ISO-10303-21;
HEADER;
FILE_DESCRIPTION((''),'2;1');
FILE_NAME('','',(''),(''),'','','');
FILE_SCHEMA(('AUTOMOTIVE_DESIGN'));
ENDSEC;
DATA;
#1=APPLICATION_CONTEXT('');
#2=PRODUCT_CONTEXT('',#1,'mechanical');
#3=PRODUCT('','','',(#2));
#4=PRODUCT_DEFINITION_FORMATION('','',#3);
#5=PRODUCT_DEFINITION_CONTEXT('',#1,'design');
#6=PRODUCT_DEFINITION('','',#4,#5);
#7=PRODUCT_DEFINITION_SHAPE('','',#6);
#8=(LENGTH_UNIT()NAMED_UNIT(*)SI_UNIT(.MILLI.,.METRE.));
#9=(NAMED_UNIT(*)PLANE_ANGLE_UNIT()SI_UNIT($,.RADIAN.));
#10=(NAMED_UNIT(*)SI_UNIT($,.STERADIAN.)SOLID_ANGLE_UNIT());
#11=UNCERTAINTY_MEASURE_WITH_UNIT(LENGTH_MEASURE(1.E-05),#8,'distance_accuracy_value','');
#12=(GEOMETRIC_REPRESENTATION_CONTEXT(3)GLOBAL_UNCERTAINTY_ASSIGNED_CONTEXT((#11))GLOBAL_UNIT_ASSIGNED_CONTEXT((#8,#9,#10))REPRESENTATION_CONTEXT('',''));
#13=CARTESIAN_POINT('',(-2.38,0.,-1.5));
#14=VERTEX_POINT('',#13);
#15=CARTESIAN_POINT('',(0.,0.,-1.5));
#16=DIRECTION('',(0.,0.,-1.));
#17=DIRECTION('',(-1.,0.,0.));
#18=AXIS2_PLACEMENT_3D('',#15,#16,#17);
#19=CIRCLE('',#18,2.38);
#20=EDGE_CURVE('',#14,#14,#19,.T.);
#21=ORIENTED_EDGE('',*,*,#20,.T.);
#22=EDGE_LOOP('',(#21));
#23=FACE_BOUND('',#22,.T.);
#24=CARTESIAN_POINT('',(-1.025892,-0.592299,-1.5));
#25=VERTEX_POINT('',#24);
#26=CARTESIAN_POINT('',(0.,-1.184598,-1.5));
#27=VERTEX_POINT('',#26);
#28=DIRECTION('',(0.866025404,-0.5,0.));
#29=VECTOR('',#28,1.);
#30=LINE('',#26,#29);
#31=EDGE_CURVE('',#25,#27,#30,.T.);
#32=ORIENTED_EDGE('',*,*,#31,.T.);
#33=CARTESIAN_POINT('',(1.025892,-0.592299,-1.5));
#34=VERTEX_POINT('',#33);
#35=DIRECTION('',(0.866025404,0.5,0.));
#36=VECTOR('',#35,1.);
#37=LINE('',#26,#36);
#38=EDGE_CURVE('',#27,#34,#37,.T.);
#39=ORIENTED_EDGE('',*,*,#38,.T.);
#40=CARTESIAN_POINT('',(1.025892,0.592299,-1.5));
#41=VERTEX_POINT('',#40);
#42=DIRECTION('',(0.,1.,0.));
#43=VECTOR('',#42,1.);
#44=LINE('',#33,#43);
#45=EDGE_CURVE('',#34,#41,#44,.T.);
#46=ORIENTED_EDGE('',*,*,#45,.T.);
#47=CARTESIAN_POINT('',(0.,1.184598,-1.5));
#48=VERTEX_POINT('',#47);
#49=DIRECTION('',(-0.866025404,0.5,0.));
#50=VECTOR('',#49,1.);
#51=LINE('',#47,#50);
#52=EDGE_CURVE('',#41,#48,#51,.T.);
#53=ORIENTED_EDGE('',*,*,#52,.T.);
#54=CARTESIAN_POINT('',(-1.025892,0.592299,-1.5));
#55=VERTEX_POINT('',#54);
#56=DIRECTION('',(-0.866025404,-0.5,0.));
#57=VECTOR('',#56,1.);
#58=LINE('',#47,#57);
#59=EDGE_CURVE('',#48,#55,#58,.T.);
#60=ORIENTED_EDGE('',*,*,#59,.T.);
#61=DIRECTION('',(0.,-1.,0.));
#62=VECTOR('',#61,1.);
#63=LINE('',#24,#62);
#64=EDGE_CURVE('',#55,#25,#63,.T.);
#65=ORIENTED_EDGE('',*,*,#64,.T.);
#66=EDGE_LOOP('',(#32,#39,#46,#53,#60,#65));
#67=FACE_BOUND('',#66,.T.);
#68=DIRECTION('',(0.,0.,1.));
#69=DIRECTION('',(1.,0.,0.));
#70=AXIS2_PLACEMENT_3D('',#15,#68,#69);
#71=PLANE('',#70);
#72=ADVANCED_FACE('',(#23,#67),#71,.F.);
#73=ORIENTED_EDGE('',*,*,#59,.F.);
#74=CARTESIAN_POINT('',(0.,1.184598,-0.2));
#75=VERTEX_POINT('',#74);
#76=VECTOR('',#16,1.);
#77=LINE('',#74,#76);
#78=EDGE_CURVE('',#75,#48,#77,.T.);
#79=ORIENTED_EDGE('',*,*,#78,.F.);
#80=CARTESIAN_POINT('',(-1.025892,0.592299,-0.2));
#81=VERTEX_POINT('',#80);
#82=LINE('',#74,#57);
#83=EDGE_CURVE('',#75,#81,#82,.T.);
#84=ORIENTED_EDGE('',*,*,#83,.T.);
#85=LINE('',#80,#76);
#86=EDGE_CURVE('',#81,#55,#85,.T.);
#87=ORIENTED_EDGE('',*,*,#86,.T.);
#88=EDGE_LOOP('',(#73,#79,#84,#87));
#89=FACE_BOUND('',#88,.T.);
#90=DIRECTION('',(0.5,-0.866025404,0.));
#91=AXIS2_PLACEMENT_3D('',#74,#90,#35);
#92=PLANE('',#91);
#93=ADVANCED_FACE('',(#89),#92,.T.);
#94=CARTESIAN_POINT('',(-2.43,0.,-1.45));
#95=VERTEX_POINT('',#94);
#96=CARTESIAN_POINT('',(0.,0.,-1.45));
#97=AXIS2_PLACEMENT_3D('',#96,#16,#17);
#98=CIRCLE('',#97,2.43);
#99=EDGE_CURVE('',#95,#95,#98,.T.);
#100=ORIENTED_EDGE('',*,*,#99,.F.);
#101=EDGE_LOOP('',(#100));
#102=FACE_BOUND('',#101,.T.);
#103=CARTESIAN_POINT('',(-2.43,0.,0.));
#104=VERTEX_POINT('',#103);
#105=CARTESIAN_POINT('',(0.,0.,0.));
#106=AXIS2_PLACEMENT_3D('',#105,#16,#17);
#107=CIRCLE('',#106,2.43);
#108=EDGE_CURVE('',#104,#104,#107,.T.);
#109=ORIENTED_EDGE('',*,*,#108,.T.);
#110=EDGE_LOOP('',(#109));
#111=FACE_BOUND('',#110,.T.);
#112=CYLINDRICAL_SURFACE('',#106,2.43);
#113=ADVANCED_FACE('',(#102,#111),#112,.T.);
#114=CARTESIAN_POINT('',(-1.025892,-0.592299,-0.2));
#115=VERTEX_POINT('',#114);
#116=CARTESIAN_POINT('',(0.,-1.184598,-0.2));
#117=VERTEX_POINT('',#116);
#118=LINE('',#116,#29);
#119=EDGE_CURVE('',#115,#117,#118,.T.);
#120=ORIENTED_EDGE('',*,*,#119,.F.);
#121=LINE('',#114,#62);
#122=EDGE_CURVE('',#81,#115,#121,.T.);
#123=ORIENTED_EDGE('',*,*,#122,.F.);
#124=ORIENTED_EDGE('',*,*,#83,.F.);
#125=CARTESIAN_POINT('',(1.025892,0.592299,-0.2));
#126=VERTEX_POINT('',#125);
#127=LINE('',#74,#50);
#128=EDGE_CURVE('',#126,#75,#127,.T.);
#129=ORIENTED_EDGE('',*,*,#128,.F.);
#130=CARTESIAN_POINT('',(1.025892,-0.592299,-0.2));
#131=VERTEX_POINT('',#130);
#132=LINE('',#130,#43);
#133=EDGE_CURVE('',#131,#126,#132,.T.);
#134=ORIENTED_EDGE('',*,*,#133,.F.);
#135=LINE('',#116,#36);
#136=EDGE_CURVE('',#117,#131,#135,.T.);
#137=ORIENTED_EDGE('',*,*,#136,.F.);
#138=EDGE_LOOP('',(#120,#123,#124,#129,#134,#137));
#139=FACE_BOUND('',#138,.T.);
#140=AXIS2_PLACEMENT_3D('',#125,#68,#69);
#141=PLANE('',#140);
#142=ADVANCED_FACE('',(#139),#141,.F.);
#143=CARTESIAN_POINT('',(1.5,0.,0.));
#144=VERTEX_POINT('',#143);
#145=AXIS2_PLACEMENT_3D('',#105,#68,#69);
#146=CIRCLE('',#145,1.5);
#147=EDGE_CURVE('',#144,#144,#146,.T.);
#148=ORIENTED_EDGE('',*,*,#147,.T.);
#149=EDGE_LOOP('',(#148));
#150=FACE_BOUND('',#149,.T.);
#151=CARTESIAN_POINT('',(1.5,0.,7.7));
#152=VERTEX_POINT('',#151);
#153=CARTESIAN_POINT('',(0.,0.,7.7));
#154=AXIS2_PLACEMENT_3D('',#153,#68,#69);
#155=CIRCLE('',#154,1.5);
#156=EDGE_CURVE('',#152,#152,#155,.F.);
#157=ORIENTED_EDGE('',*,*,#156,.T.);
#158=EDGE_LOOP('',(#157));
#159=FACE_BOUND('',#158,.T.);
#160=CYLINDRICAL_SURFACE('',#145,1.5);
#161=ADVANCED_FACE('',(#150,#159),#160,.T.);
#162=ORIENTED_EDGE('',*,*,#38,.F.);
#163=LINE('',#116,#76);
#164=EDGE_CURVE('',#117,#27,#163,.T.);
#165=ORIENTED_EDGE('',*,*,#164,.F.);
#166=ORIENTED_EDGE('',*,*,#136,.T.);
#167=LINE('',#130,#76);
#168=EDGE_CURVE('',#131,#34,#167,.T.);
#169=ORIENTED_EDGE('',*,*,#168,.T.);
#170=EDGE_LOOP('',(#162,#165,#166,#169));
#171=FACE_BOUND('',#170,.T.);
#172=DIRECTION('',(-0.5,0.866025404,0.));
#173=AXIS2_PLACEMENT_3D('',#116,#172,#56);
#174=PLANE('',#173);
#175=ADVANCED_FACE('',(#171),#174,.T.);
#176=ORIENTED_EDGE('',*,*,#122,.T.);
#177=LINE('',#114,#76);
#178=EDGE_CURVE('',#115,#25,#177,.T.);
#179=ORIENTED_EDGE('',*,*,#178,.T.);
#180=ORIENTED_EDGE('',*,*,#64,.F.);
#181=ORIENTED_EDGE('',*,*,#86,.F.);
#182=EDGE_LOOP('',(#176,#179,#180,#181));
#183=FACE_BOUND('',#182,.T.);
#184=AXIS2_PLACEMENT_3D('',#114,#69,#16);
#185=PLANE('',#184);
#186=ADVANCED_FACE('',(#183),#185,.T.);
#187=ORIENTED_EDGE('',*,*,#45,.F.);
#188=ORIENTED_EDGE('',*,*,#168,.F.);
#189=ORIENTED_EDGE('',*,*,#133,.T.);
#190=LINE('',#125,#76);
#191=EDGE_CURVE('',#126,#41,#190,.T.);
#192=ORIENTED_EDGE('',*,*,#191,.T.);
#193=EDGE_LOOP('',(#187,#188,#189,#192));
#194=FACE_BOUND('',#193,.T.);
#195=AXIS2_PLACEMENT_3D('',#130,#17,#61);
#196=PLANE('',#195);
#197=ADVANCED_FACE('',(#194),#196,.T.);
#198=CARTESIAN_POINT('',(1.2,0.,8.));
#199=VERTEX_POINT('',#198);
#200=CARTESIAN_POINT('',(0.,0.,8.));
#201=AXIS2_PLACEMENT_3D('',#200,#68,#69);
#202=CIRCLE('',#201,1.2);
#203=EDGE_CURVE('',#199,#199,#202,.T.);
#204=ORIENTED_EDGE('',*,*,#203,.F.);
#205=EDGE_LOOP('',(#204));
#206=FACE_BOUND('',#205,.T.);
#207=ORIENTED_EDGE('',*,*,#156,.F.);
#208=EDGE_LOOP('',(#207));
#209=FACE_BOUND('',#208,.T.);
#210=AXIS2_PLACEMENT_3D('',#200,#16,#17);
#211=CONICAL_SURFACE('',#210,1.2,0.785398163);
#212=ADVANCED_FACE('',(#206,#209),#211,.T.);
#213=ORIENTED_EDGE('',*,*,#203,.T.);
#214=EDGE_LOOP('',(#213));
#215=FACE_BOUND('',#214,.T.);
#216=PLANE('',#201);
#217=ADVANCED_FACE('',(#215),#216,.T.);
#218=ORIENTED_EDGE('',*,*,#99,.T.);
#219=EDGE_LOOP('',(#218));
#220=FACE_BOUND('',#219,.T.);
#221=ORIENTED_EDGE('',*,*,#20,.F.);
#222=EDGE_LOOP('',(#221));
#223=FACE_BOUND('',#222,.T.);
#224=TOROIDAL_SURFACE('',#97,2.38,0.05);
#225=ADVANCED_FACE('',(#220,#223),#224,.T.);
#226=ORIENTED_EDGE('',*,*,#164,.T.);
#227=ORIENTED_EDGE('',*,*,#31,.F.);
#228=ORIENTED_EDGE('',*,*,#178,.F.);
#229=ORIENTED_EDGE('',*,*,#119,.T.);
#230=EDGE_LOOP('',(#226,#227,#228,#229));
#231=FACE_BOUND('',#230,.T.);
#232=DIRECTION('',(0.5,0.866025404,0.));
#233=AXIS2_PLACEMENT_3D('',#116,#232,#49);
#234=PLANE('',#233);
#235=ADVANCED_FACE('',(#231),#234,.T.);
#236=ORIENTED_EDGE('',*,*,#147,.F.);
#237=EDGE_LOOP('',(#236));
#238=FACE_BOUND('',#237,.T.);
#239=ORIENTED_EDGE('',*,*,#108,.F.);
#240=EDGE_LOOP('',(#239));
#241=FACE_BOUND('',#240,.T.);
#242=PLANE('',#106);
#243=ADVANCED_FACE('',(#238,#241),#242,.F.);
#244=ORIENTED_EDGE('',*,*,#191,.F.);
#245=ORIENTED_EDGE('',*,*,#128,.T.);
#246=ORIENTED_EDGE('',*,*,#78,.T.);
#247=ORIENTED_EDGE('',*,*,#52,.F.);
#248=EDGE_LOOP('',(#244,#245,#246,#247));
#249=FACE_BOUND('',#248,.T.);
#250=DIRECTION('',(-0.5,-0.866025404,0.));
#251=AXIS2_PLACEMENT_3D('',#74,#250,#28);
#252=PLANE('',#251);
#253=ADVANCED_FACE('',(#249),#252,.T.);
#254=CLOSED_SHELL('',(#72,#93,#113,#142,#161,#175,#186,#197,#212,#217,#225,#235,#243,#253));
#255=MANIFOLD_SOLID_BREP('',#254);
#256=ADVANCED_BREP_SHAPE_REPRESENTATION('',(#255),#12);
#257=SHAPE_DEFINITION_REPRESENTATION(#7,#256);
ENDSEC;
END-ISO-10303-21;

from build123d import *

# Parameters (mm, degrees)
ENLEV_MAT_EXTRU1_DEPTH = 1.3
ESQUISSE3_W            = 1.5
ESQUISSE3_H            = 8
CHANFREIN1_SIZE        = 0.3


with BuildPart() as part:
    # Esquisse1 → Base-Révolution (revolve)
    with BuildSketch(Plane(origin=(0, 0, 0), x_dir=(1, 0, 0), z_dir=(0, 1, 0)), mode=Mode.PRIVATE) as base_r_volution_sk:
        with BuildLine():
            Line((0, 0), (2.43, 0))
            Line((2.43, 0), (2.43, 1.45))
            ThreePointArc((2.43, 1.45), (2.415355339, 1.485355339), (2.38, 1.5))
            Line((2.38, 1.5), (0, 1.5))
            Line((0, 1.5), (0, 0))
        make_face()
    revolve(base_r_volution_sk.sketch.rotate(Axis((0, 0, 0), (0, 0, -1)), 180), axis=Axis((0, 0, 0), (0, 0, -1)))

    # Esquisse2 → enlev-mat-Extru1 (cut)
    with BuildSketch(Plane.XY.offset(-1.5)):
        Polygon((1.025891605, -0.592298794), (1.025891605, 0.592298794), (0, 1.184597588), (-1.025891605, 0.592298794), (-1.025891605, -0.592298794), (0, -1.184597588), align=None)
    extrude(amount=ENLEV_MAT_EXTRU1_DEPTH, mode=Mode.SUBTRACT)

    # Esquisse3 → Boss.-Révol.1 (revolve)
    with BuildSketch(Plane(origin=(0, 0, 0), x_dir=(1, 0, 0), z_dir=(0, 1, 0))):
        with Locations((0.75, -4)):
            Rectangle(ESQUISSE3_W, ESQUISSE3_H)
    revolve(axis=Axis((0, 0, 0), (0, 0, 1)))

    # Chanfrein1
    chanfrein1_edges = [part.edges().sort_by_distance(p)[0] for p in [
        (-1.5, 0, 8),
    ]]
    chamfer(chanfrein1_edges, length=CHANFREIN1_SIZE)


solid = part.part
